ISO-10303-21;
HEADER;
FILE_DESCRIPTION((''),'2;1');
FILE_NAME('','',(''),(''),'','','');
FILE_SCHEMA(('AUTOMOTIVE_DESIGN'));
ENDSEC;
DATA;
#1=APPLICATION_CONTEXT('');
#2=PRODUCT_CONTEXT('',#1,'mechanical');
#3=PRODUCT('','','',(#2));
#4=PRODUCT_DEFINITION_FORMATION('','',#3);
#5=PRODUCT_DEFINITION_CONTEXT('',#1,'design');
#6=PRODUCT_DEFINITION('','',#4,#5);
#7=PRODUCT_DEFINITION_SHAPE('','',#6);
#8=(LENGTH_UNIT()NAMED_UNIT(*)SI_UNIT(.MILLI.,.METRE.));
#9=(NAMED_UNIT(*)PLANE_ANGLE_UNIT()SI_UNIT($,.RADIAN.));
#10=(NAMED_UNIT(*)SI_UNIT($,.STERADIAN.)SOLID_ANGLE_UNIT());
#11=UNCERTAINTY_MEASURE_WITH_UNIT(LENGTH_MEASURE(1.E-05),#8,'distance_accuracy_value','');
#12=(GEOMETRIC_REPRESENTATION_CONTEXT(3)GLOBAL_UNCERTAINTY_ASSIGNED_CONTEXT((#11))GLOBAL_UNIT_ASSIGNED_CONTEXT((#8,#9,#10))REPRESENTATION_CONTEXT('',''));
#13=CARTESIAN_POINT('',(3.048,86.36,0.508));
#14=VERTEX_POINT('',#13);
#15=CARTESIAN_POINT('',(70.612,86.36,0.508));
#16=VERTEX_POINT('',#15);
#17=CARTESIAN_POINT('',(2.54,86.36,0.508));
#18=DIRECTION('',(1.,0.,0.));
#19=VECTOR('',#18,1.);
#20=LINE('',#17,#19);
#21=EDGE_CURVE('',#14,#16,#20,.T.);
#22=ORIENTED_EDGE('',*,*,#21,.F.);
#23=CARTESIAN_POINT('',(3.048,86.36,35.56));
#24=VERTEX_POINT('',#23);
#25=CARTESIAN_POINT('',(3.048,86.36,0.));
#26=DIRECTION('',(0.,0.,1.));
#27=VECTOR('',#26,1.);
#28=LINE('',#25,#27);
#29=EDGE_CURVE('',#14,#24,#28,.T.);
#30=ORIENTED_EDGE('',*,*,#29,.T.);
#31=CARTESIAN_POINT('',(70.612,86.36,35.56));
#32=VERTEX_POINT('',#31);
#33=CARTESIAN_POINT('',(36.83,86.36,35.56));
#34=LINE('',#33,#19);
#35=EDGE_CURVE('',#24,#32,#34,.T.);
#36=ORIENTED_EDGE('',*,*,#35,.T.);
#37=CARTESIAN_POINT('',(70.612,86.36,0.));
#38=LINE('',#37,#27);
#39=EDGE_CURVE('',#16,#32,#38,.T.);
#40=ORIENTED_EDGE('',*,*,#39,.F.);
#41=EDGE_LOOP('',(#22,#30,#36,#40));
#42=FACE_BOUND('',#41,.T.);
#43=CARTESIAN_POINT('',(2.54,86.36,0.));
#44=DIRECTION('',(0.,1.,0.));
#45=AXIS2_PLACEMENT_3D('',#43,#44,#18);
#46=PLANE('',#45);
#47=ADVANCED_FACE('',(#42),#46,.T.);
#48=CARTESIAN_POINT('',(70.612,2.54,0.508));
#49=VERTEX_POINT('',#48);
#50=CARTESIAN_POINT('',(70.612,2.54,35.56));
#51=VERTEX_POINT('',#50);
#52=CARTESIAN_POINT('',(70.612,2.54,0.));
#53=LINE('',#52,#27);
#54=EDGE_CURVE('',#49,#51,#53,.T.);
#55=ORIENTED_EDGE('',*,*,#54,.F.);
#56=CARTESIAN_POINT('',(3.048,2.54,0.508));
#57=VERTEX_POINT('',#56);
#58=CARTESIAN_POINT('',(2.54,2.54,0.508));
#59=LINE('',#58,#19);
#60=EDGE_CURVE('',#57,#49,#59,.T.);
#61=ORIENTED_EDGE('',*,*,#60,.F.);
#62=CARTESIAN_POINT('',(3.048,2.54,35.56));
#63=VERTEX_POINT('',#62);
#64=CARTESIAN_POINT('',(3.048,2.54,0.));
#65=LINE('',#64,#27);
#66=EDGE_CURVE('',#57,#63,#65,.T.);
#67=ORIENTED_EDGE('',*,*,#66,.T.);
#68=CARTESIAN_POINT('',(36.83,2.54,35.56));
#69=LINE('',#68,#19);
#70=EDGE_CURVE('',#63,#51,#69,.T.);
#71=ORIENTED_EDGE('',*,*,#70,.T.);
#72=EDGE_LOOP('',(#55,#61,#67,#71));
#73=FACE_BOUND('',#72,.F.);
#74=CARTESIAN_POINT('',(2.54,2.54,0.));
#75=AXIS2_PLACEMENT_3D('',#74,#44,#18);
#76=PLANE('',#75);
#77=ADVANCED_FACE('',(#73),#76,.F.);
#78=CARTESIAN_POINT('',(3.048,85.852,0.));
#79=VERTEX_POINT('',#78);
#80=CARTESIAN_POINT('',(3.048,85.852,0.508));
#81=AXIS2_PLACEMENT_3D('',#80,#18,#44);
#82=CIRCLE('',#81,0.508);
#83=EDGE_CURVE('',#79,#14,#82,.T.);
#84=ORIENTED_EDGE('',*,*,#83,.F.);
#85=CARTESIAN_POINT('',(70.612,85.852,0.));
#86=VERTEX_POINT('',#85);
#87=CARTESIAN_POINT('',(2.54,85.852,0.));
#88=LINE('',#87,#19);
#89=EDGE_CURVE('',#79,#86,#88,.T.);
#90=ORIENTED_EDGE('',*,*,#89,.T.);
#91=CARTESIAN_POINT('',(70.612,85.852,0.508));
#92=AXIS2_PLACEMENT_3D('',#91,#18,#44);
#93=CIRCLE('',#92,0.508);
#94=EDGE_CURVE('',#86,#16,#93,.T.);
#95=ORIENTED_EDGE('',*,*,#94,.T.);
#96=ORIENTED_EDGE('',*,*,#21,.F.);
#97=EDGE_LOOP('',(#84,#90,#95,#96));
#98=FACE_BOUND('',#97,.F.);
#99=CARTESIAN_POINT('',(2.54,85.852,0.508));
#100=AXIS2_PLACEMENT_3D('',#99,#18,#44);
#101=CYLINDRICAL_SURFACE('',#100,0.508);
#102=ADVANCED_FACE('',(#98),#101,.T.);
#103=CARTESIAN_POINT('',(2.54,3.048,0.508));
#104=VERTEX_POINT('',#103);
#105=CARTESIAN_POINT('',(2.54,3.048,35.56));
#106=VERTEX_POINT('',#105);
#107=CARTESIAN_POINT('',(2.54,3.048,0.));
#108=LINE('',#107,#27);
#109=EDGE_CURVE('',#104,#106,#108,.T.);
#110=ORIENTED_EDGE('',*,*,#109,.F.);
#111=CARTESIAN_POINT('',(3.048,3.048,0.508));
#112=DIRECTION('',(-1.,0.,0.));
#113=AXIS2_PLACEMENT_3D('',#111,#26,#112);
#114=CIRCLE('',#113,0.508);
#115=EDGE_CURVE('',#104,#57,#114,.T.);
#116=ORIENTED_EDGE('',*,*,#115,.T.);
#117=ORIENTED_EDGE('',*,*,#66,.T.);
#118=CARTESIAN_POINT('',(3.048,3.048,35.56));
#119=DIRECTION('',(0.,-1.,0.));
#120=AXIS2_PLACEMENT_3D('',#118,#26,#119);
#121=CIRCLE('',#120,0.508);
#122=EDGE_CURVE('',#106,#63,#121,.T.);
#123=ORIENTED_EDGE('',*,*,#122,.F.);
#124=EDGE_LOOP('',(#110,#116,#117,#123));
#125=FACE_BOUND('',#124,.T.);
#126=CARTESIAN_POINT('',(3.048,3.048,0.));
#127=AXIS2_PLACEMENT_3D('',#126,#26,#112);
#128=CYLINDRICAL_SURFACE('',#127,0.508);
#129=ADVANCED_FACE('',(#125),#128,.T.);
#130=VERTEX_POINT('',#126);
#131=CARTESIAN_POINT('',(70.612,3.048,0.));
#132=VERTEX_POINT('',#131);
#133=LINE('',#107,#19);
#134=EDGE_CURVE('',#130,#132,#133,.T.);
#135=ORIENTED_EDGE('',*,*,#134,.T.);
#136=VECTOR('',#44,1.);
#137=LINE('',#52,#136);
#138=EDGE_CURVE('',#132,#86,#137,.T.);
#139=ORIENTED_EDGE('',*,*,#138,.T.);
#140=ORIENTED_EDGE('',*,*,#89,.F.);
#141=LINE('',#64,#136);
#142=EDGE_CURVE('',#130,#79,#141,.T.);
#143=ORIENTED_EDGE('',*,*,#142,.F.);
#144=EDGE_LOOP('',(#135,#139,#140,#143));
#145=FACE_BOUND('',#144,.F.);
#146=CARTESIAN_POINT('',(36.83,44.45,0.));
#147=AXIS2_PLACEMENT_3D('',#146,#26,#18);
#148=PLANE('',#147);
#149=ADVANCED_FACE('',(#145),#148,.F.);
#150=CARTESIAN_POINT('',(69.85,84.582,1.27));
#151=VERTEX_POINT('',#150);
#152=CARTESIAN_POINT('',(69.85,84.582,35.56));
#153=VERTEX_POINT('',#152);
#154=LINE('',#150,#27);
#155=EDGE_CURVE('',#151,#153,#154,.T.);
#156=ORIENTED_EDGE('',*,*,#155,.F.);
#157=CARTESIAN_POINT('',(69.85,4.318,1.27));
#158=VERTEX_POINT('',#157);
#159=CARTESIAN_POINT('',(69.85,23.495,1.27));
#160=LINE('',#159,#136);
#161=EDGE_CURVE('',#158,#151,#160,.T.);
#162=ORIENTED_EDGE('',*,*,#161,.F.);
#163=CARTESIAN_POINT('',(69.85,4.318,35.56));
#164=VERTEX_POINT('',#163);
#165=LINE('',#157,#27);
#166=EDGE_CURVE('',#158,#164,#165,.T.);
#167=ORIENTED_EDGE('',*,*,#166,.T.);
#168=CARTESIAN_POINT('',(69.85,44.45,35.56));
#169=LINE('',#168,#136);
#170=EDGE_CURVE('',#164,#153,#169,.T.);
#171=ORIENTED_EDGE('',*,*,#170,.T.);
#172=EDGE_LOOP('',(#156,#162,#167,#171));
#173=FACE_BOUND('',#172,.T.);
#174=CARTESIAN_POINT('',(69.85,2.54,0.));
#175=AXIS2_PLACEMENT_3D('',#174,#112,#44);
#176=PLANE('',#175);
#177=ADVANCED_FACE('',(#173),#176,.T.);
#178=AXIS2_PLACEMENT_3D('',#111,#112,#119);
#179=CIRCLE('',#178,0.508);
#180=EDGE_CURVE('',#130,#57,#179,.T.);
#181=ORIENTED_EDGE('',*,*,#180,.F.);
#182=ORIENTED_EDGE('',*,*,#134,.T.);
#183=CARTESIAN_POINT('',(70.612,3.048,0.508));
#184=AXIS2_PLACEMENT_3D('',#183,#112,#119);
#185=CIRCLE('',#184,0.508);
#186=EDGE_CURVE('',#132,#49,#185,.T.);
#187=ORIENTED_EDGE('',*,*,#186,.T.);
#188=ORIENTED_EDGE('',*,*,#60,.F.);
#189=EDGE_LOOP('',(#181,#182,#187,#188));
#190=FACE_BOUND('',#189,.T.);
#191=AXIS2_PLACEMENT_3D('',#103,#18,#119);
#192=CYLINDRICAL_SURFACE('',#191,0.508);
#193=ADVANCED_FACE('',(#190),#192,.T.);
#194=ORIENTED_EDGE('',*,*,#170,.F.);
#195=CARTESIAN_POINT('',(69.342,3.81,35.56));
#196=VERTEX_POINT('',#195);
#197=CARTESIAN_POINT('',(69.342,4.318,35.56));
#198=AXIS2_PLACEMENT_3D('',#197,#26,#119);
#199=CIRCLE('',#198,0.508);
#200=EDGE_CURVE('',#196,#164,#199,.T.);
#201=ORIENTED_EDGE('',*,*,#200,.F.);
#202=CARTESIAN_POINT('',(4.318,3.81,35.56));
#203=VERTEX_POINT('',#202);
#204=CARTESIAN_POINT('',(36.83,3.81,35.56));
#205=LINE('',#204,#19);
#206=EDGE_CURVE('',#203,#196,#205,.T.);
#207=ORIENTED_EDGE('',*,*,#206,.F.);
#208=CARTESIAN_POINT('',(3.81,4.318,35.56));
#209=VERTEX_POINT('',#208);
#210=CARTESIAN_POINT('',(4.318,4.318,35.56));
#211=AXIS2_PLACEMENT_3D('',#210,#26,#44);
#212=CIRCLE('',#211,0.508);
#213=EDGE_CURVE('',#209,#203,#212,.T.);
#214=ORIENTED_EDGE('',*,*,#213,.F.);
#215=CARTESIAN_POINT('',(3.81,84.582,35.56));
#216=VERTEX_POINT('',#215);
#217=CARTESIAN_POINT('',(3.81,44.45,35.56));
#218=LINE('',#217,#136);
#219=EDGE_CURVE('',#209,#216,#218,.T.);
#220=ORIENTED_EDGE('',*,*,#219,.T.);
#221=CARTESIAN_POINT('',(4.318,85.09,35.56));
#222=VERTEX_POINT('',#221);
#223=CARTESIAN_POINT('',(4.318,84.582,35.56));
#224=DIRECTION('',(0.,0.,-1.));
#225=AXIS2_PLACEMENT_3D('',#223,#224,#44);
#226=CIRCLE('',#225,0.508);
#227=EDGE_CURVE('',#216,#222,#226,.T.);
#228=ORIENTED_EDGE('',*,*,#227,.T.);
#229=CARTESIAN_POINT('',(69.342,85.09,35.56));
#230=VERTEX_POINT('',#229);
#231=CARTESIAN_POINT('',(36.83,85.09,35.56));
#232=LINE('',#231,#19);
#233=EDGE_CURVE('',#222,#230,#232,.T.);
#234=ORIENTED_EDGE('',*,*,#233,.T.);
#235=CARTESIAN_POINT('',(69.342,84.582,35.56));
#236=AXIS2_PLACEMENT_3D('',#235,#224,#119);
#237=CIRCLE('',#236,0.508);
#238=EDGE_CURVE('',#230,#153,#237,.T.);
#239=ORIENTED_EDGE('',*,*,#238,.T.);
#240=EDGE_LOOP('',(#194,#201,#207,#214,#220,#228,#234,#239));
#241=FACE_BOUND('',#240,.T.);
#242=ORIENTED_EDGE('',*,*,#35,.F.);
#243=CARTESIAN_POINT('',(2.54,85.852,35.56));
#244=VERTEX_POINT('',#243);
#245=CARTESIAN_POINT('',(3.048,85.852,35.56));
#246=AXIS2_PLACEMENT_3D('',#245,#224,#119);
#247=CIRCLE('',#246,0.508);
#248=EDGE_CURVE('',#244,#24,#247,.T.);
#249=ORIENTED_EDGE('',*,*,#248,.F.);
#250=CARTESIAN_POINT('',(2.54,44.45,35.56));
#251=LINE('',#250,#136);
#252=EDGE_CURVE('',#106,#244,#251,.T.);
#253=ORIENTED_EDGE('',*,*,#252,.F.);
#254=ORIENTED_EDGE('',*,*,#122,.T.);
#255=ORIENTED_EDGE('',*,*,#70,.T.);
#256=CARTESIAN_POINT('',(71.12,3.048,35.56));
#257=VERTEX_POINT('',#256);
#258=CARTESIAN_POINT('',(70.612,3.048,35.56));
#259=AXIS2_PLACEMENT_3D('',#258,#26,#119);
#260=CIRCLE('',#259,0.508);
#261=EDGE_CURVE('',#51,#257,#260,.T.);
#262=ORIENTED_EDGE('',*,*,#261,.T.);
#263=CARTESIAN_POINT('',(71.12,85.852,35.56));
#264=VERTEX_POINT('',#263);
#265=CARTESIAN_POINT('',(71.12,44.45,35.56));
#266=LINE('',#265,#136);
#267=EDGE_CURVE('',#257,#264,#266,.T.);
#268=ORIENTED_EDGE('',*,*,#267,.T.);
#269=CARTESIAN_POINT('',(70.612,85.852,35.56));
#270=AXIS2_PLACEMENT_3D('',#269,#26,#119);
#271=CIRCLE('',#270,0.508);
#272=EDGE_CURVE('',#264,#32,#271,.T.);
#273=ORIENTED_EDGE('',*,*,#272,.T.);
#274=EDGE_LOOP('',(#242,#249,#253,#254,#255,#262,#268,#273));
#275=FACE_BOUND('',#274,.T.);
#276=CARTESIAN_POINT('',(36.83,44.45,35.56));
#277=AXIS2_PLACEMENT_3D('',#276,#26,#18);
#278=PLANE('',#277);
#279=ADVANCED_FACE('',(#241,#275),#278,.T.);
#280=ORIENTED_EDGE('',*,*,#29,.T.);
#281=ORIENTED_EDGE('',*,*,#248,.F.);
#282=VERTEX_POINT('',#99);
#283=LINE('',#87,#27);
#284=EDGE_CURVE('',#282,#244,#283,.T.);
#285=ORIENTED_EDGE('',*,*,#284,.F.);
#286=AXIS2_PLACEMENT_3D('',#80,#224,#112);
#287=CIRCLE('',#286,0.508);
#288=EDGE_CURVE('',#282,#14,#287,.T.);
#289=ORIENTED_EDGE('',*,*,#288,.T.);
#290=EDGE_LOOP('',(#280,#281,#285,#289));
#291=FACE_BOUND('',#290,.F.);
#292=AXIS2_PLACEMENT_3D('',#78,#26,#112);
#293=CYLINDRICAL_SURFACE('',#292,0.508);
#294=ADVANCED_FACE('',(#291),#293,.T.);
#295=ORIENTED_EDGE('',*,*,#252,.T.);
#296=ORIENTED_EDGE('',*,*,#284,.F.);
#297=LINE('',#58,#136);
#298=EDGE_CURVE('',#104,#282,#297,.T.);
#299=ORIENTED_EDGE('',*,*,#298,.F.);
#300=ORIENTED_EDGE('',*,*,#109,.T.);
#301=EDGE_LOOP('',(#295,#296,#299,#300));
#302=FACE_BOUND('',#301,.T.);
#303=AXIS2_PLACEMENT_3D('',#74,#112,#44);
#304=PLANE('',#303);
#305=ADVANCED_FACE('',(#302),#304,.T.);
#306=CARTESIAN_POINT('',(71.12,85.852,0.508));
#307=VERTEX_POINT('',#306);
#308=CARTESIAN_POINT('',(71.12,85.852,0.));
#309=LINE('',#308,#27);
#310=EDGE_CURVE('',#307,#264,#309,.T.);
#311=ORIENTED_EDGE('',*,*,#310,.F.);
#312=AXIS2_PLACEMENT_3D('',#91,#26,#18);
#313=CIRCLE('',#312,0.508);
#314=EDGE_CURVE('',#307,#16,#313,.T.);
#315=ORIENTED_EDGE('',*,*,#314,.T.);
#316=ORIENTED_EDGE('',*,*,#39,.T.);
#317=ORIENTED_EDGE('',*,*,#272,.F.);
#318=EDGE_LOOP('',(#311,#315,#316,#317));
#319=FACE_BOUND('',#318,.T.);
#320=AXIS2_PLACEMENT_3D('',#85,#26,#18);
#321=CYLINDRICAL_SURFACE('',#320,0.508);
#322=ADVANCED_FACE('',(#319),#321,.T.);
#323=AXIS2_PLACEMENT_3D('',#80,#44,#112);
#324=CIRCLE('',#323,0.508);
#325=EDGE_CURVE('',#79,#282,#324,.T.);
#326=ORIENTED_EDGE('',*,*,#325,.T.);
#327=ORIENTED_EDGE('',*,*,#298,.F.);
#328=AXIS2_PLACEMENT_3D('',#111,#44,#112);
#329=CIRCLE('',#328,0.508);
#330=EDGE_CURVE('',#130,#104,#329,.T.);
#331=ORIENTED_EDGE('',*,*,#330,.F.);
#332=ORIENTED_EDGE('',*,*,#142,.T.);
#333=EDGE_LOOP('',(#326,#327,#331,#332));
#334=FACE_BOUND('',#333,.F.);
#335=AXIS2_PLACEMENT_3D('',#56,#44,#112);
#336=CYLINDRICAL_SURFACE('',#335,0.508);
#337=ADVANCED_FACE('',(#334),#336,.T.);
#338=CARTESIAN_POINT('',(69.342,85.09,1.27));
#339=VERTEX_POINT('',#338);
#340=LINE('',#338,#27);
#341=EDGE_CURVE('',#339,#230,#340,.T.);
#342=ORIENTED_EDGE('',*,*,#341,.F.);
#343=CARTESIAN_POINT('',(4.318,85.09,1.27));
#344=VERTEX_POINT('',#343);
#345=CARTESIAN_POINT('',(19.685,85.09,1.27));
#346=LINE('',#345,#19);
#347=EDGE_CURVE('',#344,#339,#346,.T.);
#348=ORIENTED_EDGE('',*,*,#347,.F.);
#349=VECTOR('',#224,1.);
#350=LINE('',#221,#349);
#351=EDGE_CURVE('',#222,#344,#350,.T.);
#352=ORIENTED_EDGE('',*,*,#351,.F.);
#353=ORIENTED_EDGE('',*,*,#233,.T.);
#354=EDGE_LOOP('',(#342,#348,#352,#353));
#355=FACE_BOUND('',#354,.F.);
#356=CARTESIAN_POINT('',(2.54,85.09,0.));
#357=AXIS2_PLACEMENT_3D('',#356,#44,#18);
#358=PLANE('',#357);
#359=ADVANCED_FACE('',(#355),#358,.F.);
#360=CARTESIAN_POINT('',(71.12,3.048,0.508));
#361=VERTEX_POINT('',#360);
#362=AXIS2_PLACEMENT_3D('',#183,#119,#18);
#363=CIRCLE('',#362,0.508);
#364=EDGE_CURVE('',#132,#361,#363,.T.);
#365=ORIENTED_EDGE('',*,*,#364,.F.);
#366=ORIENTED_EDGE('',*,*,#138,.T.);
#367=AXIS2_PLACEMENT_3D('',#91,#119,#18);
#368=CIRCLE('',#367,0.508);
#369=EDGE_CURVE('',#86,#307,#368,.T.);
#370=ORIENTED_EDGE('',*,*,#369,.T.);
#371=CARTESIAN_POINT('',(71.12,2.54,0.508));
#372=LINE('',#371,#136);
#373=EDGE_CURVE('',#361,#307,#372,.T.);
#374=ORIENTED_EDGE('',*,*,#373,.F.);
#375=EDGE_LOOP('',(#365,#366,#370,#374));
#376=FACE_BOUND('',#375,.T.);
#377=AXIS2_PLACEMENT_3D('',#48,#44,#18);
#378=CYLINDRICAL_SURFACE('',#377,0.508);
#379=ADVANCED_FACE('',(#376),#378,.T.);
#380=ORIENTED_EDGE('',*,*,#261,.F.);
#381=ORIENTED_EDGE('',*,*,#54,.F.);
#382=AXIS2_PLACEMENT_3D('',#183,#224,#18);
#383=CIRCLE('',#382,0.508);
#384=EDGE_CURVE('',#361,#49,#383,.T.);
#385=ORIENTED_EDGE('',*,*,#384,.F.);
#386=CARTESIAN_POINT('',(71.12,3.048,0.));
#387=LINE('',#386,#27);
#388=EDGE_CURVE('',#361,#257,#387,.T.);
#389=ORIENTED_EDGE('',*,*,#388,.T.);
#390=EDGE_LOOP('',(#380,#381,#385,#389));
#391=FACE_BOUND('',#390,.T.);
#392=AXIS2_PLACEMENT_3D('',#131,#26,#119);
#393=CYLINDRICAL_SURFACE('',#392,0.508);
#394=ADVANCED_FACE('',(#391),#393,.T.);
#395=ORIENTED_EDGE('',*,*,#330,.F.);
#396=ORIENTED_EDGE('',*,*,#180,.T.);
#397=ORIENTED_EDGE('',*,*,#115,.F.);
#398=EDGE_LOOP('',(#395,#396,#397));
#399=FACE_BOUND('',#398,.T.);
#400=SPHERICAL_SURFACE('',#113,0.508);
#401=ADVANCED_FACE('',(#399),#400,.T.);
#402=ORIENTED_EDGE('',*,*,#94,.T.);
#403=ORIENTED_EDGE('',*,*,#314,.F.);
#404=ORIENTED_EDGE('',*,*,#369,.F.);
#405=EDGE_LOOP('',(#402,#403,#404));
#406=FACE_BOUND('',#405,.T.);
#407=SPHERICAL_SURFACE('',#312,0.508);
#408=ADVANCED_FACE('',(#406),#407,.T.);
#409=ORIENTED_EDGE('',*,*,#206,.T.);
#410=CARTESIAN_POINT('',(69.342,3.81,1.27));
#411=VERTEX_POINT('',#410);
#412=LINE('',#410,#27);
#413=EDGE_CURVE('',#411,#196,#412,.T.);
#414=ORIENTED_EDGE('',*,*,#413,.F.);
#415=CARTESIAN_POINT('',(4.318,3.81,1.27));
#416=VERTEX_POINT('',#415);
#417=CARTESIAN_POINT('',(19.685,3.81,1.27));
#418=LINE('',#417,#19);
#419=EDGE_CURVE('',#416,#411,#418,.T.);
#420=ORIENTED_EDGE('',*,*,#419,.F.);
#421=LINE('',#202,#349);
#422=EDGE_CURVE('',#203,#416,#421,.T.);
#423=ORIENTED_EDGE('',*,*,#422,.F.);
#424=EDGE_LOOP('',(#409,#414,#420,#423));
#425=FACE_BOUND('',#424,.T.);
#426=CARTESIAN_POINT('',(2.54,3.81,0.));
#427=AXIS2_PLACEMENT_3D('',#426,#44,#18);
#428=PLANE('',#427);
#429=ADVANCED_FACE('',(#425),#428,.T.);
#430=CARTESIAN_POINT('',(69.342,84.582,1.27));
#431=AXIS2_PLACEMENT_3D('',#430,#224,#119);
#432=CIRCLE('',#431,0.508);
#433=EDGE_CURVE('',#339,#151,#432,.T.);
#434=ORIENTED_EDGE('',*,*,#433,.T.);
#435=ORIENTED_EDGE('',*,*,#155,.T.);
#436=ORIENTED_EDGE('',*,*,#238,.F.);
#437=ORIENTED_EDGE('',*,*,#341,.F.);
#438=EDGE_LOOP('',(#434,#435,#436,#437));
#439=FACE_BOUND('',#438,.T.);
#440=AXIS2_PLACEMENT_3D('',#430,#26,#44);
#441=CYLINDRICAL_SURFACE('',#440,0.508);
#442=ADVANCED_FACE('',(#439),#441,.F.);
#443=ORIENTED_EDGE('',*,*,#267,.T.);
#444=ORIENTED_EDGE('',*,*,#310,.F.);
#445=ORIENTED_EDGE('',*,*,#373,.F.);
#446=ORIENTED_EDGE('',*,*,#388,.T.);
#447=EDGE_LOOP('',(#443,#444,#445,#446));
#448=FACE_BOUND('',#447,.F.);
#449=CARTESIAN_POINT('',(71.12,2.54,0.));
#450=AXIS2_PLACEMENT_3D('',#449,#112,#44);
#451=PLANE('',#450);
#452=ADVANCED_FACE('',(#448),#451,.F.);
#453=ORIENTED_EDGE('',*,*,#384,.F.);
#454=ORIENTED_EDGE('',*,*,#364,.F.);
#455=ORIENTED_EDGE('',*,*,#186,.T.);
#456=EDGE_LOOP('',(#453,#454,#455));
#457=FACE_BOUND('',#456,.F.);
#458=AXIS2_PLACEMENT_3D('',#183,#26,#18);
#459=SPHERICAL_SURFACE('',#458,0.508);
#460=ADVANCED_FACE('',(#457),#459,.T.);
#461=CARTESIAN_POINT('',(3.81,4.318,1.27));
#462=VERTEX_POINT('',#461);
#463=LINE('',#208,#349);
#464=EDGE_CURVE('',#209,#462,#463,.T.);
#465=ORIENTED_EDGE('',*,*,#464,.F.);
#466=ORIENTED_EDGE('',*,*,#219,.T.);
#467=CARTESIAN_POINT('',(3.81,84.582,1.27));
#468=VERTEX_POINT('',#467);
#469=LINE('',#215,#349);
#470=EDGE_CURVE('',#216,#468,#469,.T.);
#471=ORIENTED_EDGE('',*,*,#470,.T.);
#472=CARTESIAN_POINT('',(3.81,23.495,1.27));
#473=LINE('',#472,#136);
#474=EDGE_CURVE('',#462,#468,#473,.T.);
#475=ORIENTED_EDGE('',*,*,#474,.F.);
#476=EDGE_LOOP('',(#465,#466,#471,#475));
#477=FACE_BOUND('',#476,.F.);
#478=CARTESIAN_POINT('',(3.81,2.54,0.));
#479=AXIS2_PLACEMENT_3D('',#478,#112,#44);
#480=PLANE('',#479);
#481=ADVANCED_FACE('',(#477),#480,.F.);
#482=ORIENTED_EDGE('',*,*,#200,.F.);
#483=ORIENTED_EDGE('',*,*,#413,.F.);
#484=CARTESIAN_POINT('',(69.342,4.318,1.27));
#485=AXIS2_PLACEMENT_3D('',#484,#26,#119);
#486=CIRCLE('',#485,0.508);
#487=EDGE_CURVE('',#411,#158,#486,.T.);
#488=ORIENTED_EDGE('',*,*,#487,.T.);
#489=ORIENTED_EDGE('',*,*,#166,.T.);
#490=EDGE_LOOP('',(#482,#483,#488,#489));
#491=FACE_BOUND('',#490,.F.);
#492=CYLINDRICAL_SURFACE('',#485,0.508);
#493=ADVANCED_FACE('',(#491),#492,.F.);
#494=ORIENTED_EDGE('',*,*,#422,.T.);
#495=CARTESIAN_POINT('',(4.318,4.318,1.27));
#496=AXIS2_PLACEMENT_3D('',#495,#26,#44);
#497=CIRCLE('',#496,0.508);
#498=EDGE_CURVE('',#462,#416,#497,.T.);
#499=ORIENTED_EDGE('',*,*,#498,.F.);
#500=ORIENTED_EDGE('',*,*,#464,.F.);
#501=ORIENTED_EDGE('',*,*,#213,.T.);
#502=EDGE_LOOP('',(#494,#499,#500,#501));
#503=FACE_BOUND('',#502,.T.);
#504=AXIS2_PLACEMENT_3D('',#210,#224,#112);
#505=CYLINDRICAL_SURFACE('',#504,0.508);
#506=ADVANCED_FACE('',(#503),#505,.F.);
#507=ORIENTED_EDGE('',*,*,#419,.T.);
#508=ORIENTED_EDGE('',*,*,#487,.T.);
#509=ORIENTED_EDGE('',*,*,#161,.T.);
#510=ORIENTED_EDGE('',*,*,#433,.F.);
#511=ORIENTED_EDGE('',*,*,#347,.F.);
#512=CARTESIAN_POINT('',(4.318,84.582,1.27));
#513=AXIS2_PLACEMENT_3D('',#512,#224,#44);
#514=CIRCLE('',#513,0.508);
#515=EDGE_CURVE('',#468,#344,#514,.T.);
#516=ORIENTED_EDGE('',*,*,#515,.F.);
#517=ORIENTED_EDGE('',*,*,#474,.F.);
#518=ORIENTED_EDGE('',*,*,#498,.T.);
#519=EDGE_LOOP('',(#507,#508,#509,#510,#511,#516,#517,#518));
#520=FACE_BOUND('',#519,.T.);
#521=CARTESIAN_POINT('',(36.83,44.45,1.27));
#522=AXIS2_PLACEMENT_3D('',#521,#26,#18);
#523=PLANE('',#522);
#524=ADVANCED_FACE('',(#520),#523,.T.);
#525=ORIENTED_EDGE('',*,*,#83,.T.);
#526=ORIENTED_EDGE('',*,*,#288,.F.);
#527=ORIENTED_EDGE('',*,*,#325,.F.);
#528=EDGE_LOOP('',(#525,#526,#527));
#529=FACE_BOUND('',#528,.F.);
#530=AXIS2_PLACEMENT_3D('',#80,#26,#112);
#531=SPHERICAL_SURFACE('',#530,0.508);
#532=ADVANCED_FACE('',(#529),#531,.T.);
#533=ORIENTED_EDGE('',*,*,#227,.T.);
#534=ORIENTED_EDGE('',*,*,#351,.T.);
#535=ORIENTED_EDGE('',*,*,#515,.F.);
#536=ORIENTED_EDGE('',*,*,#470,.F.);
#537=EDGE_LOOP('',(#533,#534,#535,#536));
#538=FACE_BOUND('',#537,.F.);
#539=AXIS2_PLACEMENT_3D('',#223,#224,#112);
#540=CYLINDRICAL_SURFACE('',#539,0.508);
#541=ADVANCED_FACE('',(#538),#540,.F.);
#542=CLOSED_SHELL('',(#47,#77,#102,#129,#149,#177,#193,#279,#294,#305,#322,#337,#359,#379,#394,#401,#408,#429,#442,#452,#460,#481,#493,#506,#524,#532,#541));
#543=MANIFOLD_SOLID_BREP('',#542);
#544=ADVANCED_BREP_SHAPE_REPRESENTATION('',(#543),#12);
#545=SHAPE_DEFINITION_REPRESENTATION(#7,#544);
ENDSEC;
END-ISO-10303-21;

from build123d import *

# Parameters (mm, degrees)
F0_W     = 68.58
F0_H     = 83.82
F1_DEPTH = 35.56
F2_R     = 0.508
F3_T     = -1.27
F4_R     = 0.508


with BuildPart() as f1:
    # F0 (on Top) → F1 (new body)
    with BuildSketch(Plane.XY):
        with Locations((36.83, 44.45)):
            Rectangle(F0_W, F0_H)
    extrude(amount=F1_DEPTH)

    # F2
    f2_edges = [f1.edges().sort_by_distance(p)[0] for p in [
        (71.12, 2.54, 17.78),
        (71.12, 86.36, 17.78),
        (2.54, 2.54, 17.78),
        (2.54, 86.36, 17.78),
        (71.12, 44.45, 0),
        (2.54, 44.45, 0),
        (36.83, 2.54, 0),
        (36.83, 86.36, 0),
    ]]
    fillet(f2_edges, radius=F2_R)

    # F3
    f3_openings = [f1.faces().sort_by_distance(p)[0] for p in [
        (36.83, 44.45, 35.56),
    ]]
    offset(amount=F3_T, openings=f3_openings)

    # F4
    f4_edges = [f1.edges().sort_by_distance(p)[0] for p in [
        (3.81, 3.81, 18.415),
        (3.81, 85.09, 18.415),
        (69.85, 85.09, 18.415),
        (69.85, 3.81, 18.415),
    ]]
    fillet(f4_edges, radius=F4_R)


solid = f1.part
